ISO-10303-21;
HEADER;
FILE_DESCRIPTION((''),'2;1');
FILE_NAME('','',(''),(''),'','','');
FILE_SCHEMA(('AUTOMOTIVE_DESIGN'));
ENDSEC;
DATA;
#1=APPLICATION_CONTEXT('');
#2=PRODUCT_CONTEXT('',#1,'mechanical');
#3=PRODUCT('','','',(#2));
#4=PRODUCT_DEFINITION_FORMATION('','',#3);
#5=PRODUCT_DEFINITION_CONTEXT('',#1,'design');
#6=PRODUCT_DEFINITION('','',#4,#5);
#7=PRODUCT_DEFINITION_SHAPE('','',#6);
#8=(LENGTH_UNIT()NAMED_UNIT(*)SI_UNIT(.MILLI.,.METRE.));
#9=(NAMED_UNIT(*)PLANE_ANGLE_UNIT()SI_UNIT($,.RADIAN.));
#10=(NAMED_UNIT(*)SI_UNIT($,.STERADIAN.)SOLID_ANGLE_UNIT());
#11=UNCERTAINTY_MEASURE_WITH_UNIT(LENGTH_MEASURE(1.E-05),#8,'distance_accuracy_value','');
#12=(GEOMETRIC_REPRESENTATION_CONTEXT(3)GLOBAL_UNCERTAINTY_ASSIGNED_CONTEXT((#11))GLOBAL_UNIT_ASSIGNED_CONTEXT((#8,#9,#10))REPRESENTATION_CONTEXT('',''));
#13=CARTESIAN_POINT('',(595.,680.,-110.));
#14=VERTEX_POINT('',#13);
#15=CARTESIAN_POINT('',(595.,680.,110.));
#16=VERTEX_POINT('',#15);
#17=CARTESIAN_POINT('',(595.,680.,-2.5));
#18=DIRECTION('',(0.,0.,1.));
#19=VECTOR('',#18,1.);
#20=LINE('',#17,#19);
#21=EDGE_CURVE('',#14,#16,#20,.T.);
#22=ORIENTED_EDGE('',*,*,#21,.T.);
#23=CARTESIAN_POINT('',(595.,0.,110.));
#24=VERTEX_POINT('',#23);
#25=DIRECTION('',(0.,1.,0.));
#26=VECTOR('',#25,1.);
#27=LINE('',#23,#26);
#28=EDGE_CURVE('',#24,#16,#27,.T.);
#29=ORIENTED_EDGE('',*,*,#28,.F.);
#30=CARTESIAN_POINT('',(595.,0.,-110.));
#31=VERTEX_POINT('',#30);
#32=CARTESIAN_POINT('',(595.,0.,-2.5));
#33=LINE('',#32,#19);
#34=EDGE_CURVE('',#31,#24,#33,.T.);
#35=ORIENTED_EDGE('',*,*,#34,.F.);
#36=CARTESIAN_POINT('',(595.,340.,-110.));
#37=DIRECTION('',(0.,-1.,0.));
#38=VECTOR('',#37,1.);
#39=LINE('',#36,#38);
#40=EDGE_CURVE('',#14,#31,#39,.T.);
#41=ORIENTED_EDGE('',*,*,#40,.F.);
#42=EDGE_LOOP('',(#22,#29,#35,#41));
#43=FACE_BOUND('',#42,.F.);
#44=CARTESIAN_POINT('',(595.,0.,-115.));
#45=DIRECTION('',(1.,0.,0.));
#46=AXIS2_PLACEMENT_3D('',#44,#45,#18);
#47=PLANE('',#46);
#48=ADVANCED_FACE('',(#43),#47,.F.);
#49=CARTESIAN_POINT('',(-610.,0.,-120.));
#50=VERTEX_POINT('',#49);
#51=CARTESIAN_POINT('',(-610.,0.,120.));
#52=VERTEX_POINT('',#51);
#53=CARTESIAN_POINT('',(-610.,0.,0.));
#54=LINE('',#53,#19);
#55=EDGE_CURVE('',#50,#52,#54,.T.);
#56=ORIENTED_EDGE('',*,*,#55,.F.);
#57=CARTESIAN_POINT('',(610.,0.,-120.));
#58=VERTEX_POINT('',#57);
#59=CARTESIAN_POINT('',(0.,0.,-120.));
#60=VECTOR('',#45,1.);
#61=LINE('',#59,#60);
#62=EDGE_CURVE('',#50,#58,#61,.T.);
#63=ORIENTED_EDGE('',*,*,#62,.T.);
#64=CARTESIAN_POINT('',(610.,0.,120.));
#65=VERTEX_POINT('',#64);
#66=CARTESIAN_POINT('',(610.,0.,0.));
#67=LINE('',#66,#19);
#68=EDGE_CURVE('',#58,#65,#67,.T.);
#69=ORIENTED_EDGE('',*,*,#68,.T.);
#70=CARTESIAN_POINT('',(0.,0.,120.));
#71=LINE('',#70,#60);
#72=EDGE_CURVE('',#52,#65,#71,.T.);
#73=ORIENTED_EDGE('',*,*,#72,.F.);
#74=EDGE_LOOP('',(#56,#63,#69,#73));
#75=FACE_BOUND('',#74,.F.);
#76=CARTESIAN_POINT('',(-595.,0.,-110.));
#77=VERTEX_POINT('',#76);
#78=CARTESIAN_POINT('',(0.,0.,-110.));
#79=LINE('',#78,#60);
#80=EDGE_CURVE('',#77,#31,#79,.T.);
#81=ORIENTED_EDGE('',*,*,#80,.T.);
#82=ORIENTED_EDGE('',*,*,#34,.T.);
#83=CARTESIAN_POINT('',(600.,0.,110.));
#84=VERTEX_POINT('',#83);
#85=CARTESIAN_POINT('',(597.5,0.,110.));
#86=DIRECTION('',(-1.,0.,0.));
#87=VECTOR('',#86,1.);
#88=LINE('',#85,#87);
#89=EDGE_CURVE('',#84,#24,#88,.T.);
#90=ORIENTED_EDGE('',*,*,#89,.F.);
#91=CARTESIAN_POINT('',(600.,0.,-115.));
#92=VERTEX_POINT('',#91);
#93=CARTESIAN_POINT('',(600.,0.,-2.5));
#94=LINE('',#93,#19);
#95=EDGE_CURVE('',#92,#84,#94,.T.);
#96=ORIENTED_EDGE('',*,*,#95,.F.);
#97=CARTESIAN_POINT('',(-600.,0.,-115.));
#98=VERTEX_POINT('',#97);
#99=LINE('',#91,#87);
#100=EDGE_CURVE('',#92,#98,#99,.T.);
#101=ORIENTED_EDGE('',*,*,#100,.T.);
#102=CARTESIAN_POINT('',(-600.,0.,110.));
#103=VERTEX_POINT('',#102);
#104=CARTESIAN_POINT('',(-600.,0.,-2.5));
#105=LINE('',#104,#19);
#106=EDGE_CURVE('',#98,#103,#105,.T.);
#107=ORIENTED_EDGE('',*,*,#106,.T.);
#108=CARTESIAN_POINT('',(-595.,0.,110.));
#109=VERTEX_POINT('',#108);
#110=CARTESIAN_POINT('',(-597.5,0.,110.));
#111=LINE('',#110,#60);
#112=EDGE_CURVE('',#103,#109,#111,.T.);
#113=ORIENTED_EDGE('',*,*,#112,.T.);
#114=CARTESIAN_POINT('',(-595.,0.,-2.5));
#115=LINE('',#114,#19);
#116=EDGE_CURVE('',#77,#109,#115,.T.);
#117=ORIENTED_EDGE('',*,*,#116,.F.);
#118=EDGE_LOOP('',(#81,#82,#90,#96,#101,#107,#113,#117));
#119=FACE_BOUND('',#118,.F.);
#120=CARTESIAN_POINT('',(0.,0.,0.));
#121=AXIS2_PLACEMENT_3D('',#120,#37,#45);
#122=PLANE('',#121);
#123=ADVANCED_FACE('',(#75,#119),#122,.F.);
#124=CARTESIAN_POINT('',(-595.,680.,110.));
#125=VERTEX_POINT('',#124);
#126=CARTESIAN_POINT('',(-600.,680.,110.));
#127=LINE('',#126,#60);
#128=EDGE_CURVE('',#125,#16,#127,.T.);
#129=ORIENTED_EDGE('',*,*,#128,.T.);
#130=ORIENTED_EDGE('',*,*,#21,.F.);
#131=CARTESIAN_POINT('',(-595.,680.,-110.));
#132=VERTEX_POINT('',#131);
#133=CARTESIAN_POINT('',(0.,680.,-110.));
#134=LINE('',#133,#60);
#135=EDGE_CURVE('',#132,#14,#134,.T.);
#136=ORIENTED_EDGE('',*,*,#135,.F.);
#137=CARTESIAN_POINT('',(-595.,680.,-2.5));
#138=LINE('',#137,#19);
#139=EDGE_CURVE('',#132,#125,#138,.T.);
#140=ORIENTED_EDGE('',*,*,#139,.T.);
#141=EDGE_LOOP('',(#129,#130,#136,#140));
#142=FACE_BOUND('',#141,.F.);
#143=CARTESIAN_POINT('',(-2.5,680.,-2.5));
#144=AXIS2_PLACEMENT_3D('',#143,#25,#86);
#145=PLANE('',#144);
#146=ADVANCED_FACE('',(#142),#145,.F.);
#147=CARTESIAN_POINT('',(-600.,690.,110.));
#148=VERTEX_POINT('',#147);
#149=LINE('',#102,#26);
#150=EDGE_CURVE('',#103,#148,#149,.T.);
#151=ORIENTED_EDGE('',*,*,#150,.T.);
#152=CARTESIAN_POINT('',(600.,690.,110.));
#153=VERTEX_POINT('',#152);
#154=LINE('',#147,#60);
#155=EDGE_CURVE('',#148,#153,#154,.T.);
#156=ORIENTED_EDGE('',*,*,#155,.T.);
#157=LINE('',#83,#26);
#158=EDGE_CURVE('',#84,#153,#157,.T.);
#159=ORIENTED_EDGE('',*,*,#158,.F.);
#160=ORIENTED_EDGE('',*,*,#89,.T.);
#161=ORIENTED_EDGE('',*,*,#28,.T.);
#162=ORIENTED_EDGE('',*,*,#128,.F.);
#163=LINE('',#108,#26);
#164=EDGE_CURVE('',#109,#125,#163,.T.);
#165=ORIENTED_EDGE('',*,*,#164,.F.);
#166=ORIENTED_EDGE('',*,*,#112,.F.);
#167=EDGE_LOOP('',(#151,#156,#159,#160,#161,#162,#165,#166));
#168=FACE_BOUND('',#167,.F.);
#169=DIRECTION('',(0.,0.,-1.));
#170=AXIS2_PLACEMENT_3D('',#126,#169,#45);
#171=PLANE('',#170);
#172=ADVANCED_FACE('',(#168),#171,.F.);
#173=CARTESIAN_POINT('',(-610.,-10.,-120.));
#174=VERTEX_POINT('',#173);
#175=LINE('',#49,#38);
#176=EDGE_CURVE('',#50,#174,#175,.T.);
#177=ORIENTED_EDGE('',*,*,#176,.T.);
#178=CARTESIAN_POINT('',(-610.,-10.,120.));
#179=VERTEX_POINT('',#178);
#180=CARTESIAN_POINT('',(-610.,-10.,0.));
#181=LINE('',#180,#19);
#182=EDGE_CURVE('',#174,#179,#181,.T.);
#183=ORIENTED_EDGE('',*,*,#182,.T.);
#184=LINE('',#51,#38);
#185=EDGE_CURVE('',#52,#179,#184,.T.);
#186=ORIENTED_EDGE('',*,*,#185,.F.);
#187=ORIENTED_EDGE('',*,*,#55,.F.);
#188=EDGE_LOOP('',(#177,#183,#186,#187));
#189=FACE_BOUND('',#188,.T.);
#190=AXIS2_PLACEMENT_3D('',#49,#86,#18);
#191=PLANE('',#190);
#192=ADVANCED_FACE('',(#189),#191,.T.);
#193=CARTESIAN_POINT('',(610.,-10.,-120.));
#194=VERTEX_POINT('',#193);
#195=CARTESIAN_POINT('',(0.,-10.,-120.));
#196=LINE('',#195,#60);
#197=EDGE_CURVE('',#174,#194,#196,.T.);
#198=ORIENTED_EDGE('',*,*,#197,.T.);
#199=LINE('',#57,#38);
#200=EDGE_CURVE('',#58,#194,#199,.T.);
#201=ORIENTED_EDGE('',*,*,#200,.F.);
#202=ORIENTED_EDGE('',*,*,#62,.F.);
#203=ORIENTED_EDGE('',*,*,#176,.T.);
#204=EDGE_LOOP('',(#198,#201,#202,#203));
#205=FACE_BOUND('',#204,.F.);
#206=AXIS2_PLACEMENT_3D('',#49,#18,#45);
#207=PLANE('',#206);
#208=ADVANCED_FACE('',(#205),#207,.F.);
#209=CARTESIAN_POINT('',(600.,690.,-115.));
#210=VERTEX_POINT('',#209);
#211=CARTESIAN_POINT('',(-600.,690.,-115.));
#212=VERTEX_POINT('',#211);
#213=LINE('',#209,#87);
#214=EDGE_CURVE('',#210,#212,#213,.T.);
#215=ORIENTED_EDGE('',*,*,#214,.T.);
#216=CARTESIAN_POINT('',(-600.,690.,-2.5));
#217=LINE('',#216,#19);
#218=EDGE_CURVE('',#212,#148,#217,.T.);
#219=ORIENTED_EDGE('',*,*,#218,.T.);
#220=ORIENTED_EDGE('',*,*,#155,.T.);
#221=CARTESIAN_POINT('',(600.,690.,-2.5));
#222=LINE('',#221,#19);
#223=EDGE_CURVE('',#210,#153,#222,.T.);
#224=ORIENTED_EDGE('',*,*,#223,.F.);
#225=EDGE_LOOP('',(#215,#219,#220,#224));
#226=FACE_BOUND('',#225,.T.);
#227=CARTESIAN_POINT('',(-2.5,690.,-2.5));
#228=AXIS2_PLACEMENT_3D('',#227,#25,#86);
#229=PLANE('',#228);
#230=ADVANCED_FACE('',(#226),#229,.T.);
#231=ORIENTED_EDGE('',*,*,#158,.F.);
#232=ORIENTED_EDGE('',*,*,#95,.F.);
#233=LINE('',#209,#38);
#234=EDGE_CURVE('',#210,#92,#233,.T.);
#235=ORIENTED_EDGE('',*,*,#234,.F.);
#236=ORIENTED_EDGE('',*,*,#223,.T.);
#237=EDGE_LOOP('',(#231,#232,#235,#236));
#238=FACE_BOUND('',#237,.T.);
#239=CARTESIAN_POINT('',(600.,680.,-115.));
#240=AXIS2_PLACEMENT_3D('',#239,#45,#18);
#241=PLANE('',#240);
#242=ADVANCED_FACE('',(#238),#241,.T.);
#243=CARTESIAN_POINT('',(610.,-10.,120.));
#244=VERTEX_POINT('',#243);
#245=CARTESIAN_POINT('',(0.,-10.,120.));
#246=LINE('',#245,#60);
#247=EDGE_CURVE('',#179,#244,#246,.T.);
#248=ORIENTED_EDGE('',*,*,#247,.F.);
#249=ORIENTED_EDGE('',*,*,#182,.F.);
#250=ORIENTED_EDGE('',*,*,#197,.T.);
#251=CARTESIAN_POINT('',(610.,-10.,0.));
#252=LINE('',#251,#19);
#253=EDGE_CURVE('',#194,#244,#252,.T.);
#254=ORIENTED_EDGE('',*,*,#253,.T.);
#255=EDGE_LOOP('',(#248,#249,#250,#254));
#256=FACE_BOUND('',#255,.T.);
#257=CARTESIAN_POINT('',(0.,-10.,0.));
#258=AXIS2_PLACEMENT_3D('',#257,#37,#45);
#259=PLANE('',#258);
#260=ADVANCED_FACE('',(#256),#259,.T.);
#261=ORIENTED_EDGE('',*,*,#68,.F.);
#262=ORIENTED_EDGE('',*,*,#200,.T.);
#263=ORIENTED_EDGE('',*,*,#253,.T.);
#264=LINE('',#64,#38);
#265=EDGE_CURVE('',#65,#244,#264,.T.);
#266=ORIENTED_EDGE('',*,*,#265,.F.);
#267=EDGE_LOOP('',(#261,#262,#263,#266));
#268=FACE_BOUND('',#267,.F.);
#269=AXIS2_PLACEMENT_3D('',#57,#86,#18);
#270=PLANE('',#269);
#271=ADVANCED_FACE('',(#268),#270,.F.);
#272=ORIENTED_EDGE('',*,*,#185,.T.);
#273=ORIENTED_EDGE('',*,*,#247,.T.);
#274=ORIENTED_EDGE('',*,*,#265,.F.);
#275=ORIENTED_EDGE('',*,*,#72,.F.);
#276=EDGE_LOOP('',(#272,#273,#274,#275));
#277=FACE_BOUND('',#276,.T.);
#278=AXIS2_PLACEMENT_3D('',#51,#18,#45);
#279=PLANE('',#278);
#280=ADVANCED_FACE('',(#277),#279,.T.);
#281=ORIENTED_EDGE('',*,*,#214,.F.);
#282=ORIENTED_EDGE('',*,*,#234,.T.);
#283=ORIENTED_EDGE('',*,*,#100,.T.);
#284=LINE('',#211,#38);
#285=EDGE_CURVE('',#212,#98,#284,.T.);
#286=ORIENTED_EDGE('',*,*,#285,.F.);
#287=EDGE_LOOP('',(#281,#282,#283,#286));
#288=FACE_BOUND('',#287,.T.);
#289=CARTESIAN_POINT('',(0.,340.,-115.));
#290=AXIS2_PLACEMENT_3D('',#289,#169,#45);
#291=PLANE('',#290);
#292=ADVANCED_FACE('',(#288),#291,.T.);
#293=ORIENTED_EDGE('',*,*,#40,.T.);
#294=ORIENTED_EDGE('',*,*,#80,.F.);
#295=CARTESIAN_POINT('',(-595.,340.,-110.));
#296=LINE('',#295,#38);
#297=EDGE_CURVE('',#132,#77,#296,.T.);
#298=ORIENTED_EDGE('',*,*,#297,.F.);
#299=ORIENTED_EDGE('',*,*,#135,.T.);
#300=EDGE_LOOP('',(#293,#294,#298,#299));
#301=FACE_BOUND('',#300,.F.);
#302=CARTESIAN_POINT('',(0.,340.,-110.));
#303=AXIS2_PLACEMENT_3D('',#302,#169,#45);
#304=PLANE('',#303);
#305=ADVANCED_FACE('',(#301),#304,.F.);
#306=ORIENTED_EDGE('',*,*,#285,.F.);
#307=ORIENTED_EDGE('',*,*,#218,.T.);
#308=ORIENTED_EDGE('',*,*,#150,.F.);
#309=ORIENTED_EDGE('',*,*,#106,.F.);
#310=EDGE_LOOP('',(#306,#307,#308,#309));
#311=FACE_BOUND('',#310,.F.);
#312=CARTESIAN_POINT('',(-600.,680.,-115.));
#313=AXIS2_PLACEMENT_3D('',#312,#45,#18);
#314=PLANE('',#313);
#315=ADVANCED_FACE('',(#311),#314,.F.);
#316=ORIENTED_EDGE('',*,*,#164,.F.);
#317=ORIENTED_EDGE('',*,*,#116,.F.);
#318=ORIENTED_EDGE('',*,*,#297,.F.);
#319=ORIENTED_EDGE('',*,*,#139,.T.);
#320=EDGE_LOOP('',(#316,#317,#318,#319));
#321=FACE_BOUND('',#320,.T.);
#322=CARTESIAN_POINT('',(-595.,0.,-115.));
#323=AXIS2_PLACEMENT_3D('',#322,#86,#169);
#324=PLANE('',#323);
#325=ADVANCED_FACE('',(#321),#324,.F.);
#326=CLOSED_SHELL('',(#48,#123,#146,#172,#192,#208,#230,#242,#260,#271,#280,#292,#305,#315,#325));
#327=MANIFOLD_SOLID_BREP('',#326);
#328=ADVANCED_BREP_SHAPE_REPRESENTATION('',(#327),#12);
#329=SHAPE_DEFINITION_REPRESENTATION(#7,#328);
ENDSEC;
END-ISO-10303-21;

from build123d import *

# Parameters (mm, degrees)
F0_W     = 1220
F0_H     = 240
F1_DEPTH = 10
F2_W     = 5
F2_H     = 225
F3_DEPTH = 680
F4_W     = 1195
F4_H     = 225
F4_W_2   = 5
F5_DEPTH = 10
F6_W     = 1190
F6_H     = 680
F7_DEPTH = 5


# Not quite as in the source:
# - a pattern or mirror of a feature is missing from the dataset's text; its kind, count and spacing are read off the source's solid


with BuildPart() as f1:
    # F0 (on Front) → F1 (new body)
    with BuildSketch(Plane.XZ):
        Rectangle(F0_W, F0_H)
    extrude(amount=F1_DEPTH)

    # F2 (on face) → F3 (join)
    with BuildSketch(Plane(origin=(0, 0, 0), x_dir=(-1, 0, 0), z_dir=(0, 1, 0))):
        with Locations((-597.5, -2.5)):
            Rectangle(F2_W, F2_H)
    f3 = extrude(amount=F3_DEPTH)

    # F3_copies: F3 across plane
    add(f3.mirror(Plane(origin=(0, 0, 0), x_dir=(0, 0, -1), z_dir=(-1, 0, 0))))

    # F4 (on face) → F5 (join)
    with BuildSketch(Plane(origin=(0, 680, 0), x_dir=(-1, 0, 0), z_dir=(0, 1, 0))):
        with Locations((2.5, -2.5)):
            Rectangle(F4_W, F4_H)
        with Locations((-597.5, -2.5)):
            Rectangle(F4_W_2, F4_H)
    extrude(amount=F5_DEPTH)

    # F6 (on face) → F7 (join)
    with BuildSketch(Plane(origin=(0, 0, -115), x_dir=(1, 0, 0), z_dir=(0, 0, -1))):
        with Locations((0, -340)):
            Rectangle(F6_W, F6_H)
    extrude(amount=-F7_DEPTH)


solid = f1.part
